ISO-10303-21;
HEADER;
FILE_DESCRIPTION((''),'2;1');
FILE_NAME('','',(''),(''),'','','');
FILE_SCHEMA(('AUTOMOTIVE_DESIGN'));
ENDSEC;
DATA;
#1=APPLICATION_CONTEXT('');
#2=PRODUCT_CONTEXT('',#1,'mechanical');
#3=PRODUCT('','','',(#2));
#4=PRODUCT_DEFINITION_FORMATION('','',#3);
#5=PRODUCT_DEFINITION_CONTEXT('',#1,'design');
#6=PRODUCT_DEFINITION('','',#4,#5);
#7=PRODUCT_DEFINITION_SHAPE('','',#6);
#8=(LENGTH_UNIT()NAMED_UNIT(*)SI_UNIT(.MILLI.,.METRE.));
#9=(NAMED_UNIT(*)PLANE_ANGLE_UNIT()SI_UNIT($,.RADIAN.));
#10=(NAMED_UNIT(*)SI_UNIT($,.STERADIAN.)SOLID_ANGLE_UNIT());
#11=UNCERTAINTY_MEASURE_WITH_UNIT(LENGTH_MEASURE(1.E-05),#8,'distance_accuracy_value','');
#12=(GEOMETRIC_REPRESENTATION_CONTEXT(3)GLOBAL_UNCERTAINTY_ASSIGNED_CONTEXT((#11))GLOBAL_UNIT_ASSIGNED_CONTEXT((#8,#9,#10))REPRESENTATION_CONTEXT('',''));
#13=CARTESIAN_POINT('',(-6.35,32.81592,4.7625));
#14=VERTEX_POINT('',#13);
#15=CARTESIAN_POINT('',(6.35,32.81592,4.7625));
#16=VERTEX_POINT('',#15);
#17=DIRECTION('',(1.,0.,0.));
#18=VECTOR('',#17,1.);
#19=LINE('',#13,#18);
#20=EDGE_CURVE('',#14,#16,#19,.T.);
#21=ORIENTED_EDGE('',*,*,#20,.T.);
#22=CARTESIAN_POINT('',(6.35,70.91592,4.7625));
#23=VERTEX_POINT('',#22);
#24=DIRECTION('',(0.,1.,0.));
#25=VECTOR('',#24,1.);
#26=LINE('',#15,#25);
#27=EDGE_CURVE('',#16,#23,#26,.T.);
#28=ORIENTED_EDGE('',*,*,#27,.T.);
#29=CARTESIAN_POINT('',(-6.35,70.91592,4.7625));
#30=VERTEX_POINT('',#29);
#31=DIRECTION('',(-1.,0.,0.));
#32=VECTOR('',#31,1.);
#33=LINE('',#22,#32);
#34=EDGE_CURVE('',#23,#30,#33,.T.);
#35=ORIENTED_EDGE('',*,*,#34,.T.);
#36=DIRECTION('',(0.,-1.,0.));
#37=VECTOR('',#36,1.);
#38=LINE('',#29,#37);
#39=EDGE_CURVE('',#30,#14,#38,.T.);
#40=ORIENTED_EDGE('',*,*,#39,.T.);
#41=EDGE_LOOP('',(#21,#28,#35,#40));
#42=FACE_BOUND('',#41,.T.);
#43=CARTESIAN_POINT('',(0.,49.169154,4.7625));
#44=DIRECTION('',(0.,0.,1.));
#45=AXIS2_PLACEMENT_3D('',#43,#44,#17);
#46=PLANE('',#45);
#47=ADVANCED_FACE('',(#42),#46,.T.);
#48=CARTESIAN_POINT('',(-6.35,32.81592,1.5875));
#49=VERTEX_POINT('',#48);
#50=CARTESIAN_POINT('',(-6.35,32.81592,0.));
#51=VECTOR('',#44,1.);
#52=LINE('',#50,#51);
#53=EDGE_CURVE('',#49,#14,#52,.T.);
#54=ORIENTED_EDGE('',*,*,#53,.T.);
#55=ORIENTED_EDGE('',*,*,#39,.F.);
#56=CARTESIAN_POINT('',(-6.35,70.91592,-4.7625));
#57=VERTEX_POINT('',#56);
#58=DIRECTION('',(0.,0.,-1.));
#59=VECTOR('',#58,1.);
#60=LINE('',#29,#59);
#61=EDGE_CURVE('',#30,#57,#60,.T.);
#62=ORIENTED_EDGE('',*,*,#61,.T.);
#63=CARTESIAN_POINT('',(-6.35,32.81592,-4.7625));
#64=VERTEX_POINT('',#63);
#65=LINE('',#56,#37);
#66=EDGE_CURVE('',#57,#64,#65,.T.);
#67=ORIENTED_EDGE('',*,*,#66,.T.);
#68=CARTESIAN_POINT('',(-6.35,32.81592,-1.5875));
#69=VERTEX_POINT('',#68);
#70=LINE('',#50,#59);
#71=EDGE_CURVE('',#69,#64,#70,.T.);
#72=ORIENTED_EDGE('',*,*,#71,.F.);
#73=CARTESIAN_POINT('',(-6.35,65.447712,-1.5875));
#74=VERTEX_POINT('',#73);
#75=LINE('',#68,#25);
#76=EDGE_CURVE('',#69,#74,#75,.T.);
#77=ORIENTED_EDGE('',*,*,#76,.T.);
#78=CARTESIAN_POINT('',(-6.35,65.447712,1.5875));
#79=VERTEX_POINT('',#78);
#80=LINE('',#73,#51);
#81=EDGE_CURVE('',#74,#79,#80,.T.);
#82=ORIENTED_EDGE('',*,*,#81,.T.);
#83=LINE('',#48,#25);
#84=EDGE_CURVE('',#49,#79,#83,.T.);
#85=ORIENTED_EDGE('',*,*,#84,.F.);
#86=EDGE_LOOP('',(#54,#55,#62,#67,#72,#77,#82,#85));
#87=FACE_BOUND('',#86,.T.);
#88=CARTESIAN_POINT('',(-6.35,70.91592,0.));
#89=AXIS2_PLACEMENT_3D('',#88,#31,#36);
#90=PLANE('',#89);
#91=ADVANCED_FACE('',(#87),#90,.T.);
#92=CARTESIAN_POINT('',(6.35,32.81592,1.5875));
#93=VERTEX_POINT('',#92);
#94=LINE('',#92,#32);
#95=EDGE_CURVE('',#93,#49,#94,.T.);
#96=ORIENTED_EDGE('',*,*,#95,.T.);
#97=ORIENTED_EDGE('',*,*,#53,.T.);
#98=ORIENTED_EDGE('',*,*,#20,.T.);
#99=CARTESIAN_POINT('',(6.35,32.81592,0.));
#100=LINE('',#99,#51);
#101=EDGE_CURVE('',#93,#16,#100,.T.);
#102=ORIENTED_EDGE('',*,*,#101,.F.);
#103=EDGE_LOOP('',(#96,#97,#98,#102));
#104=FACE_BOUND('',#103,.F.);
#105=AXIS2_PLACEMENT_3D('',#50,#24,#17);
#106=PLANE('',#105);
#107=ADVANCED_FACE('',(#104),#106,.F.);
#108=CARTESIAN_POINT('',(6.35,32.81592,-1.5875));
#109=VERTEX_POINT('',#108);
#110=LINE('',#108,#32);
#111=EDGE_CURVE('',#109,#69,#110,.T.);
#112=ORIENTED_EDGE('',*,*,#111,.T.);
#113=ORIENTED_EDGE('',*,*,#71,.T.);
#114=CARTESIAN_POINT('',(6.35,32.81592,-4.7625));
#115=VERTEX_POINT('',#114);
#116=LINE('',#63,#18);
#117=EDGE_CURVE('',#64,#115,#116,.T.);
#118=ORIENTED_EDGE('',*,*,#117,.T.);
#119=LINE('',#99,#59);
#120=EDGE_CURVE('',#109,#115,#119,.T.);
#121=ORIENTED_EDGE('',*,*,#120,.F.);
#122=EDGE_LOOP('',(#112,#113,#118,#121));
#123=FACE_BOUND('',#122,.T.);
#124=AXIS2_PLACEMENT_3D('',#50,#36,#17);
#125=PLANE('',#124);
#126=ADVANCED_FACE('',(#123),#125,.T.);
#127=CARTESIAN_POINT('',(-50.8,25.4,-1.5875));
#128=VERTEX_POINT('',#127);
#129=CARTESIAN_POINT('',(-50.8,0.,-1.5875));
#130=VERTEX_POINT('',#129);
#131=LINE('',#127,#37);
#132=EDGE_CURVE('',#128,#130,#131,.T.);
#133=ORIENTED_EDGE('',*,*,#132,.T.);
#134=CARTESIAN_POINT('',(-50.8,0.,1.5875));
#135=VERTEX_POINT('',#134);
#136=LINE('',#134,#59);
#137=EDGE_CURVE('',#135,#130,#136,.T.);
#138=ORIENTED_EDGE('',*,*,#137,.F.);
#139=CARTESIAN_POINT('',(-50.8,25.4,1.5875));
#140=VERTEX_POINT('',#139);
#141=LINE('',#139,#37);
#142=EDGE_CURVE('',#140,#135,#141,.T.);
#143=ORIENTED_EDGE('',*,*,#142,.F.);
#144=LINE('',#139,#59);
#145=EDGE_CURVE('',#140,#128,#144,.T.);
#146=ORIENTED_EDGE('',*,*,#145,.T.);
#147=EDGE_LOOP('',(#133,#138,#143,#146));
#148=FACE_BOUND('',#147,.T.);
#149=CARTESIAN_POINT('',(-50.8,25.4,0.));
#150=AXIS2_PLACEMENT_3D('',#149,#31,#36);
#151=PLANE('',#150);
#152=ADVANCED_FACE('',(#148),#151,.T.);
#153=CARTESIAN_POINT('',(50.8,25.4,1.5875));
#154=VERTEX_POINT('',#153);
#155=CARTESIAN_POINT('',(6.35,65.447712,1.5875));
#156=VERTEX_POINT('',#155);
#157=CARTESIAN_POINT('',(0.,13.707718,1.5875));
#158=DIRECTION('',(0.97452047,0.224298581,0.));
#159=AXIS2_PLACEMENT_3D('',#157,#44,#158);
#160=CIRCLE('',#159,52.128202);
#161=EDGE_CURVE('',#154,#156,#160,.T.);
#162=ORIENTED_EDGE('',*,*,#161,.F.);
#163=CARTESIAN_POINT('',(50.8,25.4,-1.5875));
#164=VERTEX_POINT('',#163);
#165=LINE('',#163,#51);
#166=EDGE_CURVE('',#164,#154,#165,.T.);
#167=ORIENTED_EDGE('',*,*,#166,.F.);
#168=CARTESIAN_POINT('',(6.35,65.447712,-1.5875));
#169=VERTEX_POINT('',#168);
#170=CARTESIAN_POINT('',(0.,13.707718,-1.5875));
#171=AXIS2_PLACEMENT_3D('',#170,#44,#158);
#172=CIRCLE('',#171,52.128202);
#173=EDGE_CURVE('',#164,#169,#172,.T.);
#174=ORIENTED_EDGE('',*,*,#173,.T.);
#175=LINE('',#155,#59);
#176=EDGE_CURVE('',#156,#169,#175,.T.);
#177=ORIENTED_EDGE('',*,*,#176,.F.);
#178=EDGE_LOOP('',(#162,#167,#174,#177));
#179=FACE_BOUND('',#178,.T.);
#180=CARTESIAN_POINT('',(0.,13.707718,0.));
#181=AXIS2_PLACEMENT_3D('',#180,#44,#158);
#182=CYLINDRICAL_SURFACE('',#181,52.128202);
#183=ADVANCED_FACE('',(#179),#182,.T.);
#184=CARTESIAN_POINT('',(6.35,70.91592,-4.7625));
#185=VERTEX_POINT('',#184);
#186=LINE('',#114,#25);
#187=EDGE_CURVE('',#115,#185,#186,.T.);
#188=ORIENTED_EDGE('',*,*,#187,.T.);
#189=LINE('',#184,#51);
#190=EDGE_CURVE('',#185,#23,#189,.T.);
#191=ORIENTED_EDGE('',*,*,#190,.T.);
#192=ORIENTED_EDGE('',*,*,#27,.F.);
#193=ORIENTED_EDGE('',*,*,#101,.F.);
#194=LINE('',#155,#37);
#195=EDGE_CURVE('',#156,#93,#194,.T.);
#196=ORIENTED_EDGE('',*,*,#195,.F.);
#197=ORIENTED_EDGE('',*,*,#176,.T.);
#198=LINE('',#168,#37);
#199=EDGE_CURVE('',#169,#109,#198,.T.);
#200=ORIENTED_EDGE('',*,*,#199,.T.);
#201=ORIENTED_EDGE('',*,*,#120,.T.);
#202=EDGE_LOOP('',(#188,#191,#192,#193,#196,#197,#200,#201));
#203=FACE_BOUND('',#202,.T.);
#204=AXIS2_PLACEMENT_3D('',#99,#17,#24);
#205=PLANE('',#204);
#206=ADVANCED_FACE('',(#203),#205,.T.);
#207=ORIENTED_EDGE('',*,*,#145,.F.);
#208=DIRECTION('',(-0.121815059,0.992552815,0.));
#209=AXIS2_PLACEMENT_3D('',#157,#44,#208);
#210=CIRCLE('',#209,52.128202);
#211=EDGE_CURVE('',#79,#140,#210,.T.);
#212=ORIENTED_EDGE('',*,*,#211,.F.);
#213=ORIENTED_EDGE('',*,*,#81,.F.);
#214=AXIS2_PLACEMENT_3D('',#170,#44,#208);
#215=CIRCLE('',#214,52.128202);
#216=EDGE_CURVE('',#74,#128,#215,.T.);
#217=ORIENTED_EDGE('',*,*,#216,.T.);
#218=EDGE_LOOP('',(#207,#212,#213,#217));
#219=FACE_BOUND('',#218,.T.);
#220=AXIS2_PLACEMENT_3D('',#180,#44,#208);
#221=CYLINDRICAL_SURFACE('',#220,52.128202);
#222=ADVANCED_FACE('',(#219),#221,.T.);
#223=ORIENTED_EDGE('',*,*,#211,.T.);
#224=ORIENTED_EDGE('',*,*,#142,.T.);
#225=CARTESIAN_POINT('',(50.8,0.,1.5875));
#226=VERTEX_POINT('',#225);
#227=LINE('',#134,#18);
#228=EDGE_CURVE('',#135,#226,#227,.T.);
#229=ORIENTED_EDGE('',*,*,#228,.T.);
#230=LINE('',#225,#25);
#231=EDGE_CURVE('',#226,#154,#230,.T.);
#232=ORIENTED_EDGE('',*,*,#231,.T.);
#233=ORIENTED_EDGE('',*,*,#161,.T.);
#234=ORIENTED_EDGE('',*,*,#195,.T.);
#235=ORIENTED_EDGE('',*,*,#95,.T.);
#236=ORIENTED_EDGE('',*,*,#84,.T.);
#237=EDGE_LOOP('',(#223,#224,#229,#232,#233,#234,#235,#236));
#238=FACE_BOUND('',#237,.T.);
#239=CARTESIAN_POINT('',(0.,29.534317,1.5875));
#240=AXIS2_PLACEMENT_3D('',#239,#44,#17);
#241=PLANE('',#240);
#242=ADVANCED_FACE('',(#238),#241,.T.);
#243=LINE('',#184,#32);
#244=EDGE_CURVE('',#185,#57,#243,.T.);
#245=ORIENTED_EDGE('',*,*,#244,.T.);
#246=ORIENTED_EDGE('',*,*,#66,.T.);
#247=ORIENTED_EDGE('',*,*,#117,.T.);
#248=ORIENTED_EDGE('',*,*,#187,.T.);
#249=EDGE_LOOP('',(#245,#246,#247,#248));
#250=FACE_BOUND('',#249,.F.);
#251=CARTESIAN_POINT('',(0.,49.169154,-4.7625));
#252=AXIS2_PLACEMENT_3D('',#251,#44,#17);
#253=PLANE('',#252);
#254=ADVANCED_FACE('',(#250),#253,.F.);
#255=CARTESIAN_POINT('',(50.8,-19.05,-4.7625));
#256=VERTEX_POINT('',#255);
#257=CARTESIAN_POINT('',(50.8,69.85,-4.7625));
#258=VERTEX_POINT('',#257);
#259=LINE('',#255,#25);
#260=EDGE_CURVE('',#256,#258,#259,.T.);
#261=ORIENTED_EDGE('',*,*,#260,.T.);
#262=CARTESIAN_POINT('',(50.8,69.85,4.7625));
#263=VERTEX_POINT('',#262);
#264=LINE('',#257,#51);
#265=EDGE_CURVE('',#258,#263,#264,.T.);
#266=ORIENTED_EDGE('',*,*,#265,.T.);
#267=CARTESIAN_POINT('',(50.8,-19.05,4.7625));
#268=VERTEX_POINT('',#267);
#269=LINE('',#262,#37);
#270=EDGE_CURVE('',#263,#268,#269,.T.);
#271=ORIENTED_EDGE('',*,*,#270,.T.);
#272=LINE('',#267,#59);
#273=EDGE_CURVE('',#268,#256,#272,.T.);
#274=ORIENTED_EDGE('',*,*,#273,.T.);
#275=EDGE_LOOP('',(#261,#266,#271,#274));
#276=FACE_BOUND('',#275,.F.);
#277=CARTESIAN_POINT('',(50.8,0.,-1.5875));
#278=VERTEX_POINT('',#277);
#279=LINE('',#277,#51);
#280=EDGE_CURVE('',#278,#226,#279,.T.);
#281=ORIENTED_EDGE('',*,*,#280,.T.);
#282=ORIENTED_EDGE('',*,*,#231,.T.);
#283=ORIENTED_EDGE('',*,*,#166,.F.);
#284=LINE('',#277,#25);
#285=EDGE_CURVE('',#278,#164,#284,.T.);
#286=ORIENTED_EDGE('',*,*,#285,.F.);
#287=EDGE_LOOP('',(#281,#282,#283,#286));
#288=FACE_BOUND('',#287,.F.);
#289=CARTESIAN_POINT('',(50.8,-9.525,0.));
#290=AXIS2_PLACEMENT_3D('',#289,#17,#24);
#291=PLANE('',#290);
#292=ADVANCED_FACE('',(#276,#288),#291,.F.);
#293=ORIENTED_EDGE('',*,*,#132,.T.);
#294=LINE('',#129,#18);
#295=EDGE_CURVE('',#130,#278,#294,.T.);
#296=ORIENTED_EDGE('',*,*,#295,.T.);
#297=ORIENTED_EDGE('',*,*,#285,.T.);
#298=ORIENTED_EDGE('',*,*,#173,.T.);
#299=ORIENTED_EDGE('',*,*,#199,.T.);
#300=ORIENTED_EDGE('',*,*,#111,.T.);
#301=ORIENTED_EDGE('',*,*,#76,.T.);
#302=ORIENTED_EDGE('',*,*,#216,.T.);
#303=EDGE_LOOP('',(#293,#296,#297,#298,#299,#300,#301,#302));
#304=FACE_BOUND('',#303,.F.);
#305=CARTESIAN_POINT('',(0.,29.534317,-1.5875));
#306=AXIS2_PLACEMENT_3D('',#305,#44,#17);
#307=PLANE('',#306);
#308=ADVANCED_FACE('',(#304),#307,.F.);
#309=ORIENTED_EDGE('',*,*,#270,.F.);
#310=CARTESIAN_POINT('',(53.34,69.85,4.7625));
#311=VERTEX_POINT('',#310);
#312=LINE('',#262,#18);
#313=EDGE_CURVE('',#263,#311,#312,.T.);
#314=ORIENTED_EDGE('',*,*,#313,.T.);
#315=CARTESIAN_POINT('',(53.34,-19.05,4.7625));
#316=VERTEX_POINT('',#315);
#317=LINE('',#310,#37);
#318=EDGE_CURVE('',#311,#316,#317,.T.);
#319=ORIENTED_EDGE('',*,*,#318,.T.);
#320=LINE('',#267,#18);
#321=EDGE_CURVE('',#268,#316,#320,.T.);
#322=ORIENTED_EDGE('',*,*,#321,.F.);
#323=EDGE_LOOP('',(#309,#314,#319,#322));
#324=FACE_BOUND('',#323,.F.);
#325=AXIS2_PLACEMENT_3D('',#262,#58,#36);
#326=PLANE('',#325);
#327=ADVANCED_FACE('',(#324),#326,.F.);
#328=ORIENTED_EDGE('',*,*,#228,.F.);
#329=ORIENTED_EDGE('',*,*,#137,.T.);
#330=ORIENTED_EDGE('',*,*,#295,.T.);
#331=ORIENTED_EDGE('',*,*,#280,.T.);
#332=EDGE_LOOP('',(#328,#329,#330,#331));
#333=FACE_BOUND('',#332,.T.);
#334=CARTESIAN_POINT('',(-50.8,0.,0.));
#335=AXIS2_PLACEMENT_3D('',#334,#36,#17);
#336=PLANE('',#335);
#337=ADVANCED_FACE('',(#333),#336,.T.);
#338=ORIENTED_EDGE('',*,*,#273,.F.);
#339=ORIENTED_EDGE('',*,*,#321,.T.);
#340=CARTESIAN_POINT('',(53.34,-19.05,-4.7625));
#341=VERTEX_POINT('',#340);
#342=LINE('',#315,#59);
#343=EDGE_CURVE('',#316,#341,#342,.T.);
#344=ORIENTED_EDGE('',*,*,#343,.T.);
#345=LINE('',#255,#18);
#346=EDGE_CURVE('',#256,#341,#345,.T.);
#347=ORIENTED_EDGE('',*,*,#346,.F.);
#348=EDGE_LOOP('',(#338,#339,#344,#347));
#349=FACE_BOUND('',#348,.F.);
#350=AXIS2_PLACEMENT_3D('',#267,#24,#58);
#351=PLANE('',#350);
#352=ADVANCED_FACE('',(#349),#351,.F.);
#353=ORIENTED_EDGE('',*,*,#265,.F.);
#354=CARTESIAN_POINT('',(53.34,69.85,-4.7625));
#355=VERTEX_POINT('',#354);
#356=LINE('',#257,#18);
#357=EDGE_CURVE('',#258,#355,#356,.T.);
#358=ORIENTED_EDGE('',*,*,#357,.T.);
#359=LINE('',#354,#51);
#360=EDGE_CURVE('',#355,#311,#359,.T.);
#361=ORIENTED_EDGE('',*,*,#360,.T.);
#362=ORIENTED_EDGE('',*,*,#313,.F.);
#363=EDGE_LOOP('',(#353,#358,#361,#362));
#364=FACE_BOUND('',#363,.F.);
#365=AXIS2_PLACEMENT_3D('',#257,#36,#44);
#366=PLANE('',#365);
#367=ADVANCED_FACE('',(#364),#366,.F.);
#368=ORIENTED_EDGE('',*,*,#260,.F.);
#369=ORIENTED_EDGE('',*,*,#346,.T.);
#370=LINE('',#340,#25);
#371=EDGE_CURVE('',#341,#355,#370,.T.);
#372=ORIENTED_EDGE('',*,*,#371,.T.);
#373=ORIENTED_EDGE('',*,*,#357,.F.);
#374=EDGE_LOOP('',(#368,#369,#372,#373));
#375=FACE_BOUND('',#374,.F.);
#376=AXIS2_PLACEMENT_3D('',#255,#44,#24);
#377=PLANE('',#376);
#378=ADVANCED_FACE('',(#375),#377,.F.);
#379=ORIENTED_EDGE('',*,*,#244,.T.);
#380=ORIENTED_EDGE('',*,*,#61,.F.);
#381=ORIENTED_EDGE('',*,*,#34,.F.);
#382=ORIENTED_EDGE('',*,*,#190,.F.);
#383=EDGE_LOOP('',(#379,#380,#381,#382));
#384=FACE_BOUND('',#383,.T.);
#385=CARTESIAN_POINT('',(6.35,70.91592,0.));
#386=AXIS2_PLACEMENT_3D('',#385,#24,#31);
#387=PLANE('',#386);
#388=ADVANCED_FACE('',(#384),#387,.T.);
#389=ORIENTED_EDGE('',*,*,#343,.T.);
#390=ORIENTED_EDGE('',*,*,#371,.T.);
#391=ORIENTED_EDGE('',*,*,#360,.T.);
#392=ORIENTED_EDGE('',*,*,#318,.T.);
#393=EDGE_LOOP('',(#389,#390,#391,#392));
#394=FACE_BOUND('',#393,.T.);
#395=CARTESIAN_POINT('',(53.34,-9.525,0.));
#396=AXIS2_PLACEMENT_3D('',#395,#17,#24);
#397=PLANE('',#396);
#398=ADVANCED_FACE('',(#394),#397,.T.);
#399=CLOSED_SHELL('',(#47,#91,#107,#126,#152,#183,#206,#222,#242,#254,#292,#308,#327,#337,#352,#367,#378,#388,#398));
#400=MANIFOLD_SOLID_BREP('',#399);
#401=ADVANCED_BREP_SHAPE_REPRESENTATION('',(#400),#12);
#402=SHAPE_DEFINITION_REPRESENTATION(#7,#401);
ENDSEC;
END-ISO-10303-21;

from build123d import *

# Parameters (mm, degrees)
F1_DEPTH = 1.5875
F2_DEPTH = 1.5875
F3_DEPTH = 4.7625
F4_DEPTH = 4.7625
F5_W     = 19.05
F5_H     = 3.175
F5_W_2   = 25.4
F5_W_3   = 44.45
F6_DEPTH = 2.54


with BuildPart() as f1:
    # F0 (on Top) → F1 (new body)
    with BuildSketch(Plane.XY):
        with BuildLine():
            Line((-50.8, 0), (0, 0))
            Line((0, 0), (50.8, 0))
            Line((50.8, 0), (50.8, 25.4))
            ThreePointArc((50.8, 25.4), (34.8924839126, 52.4357961473), (6.35, 65.4477119742))
            Line((6.35, 65.4477119742), (6.35, 32.8159203153))
            Line((6.35, 32.8159203153), (0, 32.8159203153))
            Line((0, 32.8159203153), (-6.35, 32.8159203153))
            Line((-6.35, 32.8159203153), (-6.35, 65.4477119742))
            ThreePointArc((-6.35, 65.4477119742), (-34.8924839126, 52.4357961473), (-50.8, 25.4))
            Line((-50.8, 25.4), (-50.8, 0))
        make_face()
    extrude(amount=F1_DEPTH)

    # F2 (add): a face of the model
    f2_faces = [f1.faces().sort_by_distance(p)[0] for p in [
        (0, 27.1005445022, 0),
    ]]
    extrude(f2_faces, amount=F2_DEPTH)

    # F0 (on Top) → F3 (join)
    with BuildSketch(Plane.XY):
        with BuildLine():
            ThreePointArc((6.35, 65.4477119742), (0, 65.8359203153), (-6.35, 65.4477119742))
            Line((-6.35, 65.4477119742), (-6.35, 32.8159203153))
            Line((-6.35, 32.8159203153), (0, 32.8159203153))
            Line((0, 32.8159203153), (6.35, 32.8159203153))
            Line((6.35, 32.8159203153), (6.35, 65.4477119742))
        make_face()
        with BuildLine():
            Line((-6.35, 70.9159203153), (-6.35, 65.4477119742))
            ThreePointArc((-6.35, 65.4477119742), (0, 65.8359203153), (6.35, 65.4477119742))
            Line((6.35, 65.4477119742), (6.35, 70.9159203153))
            Line((6.35, 70.9159203153), (0, 70.9159203153))
            Line((0, 70.9159203153), (-6.35, 70.9159203153))
        make_face()
    extrude(amount=F3_DEPTH)

    # F0 (on Top) → F4 (join)
    with BuildSketch(Plane.XY):
        with BuildLine():
            ThreePointArc((6.35, 65.4477119742), (0, 65.8359203153), (-6.35, 65.4477119742))
            Line((-6.35, 65.4477119742), (-6.35, 32.8159203153))
            Line((-6.35, 32.8159203153), (0, 32.8159203153))
            Line((0, 32.8159203153), (6.35, 32.8159203153))
            Line((6.35, 32.8159203153), (6.35, 65.4477119742))
        make_face()
        with BuildLine():
            Line((-6.35, 70.9159203153), (-6.35, 65.4477119742))
            ThreePointArc((-6.35, 65.4477119742), (0, 65.8359203153), (6.35, 65.4477119742))
            Line((6.35, 65.4477119742), (6.35, 70.9159203153))
            Line((6.35, 70.9159203153), (0, 70.9159203153))
            Line((0, 70.9159203153), (-6.35, 70.9159203153))
        make_face()
    extrude(amount=-F4_DEPTH)

    # F5 (on face) → F6 (join)
    with BuildSketch(Plane.YZ.offset(50.8)):
        with Locations((-9.525, 0)):
            Rectangle(F5_W, F5_H)
        Polygon((-19.05, 1.5875), (0, 1.5875), (25.4, 1.5875), (69.85, 1.5875), (69.85, 4.7625), (-19.05, 4.7625), align=None)
        with Locations((12.7, 0)):
            Rectangle(F5_W_2, F5_H)
        with Locations((47.625, 0)):
            Rectangle(F5_W_3, F5_H)
        Polygon((25.4, -1.5875), (0, -1.5875), (-19.05, -1.5875), (-19.05, -4.7625), (69.85, -4.7625), (69.85, -1.5875), align=None)
    extrude(amount=F6_DEPTH)


solid = f1.part
